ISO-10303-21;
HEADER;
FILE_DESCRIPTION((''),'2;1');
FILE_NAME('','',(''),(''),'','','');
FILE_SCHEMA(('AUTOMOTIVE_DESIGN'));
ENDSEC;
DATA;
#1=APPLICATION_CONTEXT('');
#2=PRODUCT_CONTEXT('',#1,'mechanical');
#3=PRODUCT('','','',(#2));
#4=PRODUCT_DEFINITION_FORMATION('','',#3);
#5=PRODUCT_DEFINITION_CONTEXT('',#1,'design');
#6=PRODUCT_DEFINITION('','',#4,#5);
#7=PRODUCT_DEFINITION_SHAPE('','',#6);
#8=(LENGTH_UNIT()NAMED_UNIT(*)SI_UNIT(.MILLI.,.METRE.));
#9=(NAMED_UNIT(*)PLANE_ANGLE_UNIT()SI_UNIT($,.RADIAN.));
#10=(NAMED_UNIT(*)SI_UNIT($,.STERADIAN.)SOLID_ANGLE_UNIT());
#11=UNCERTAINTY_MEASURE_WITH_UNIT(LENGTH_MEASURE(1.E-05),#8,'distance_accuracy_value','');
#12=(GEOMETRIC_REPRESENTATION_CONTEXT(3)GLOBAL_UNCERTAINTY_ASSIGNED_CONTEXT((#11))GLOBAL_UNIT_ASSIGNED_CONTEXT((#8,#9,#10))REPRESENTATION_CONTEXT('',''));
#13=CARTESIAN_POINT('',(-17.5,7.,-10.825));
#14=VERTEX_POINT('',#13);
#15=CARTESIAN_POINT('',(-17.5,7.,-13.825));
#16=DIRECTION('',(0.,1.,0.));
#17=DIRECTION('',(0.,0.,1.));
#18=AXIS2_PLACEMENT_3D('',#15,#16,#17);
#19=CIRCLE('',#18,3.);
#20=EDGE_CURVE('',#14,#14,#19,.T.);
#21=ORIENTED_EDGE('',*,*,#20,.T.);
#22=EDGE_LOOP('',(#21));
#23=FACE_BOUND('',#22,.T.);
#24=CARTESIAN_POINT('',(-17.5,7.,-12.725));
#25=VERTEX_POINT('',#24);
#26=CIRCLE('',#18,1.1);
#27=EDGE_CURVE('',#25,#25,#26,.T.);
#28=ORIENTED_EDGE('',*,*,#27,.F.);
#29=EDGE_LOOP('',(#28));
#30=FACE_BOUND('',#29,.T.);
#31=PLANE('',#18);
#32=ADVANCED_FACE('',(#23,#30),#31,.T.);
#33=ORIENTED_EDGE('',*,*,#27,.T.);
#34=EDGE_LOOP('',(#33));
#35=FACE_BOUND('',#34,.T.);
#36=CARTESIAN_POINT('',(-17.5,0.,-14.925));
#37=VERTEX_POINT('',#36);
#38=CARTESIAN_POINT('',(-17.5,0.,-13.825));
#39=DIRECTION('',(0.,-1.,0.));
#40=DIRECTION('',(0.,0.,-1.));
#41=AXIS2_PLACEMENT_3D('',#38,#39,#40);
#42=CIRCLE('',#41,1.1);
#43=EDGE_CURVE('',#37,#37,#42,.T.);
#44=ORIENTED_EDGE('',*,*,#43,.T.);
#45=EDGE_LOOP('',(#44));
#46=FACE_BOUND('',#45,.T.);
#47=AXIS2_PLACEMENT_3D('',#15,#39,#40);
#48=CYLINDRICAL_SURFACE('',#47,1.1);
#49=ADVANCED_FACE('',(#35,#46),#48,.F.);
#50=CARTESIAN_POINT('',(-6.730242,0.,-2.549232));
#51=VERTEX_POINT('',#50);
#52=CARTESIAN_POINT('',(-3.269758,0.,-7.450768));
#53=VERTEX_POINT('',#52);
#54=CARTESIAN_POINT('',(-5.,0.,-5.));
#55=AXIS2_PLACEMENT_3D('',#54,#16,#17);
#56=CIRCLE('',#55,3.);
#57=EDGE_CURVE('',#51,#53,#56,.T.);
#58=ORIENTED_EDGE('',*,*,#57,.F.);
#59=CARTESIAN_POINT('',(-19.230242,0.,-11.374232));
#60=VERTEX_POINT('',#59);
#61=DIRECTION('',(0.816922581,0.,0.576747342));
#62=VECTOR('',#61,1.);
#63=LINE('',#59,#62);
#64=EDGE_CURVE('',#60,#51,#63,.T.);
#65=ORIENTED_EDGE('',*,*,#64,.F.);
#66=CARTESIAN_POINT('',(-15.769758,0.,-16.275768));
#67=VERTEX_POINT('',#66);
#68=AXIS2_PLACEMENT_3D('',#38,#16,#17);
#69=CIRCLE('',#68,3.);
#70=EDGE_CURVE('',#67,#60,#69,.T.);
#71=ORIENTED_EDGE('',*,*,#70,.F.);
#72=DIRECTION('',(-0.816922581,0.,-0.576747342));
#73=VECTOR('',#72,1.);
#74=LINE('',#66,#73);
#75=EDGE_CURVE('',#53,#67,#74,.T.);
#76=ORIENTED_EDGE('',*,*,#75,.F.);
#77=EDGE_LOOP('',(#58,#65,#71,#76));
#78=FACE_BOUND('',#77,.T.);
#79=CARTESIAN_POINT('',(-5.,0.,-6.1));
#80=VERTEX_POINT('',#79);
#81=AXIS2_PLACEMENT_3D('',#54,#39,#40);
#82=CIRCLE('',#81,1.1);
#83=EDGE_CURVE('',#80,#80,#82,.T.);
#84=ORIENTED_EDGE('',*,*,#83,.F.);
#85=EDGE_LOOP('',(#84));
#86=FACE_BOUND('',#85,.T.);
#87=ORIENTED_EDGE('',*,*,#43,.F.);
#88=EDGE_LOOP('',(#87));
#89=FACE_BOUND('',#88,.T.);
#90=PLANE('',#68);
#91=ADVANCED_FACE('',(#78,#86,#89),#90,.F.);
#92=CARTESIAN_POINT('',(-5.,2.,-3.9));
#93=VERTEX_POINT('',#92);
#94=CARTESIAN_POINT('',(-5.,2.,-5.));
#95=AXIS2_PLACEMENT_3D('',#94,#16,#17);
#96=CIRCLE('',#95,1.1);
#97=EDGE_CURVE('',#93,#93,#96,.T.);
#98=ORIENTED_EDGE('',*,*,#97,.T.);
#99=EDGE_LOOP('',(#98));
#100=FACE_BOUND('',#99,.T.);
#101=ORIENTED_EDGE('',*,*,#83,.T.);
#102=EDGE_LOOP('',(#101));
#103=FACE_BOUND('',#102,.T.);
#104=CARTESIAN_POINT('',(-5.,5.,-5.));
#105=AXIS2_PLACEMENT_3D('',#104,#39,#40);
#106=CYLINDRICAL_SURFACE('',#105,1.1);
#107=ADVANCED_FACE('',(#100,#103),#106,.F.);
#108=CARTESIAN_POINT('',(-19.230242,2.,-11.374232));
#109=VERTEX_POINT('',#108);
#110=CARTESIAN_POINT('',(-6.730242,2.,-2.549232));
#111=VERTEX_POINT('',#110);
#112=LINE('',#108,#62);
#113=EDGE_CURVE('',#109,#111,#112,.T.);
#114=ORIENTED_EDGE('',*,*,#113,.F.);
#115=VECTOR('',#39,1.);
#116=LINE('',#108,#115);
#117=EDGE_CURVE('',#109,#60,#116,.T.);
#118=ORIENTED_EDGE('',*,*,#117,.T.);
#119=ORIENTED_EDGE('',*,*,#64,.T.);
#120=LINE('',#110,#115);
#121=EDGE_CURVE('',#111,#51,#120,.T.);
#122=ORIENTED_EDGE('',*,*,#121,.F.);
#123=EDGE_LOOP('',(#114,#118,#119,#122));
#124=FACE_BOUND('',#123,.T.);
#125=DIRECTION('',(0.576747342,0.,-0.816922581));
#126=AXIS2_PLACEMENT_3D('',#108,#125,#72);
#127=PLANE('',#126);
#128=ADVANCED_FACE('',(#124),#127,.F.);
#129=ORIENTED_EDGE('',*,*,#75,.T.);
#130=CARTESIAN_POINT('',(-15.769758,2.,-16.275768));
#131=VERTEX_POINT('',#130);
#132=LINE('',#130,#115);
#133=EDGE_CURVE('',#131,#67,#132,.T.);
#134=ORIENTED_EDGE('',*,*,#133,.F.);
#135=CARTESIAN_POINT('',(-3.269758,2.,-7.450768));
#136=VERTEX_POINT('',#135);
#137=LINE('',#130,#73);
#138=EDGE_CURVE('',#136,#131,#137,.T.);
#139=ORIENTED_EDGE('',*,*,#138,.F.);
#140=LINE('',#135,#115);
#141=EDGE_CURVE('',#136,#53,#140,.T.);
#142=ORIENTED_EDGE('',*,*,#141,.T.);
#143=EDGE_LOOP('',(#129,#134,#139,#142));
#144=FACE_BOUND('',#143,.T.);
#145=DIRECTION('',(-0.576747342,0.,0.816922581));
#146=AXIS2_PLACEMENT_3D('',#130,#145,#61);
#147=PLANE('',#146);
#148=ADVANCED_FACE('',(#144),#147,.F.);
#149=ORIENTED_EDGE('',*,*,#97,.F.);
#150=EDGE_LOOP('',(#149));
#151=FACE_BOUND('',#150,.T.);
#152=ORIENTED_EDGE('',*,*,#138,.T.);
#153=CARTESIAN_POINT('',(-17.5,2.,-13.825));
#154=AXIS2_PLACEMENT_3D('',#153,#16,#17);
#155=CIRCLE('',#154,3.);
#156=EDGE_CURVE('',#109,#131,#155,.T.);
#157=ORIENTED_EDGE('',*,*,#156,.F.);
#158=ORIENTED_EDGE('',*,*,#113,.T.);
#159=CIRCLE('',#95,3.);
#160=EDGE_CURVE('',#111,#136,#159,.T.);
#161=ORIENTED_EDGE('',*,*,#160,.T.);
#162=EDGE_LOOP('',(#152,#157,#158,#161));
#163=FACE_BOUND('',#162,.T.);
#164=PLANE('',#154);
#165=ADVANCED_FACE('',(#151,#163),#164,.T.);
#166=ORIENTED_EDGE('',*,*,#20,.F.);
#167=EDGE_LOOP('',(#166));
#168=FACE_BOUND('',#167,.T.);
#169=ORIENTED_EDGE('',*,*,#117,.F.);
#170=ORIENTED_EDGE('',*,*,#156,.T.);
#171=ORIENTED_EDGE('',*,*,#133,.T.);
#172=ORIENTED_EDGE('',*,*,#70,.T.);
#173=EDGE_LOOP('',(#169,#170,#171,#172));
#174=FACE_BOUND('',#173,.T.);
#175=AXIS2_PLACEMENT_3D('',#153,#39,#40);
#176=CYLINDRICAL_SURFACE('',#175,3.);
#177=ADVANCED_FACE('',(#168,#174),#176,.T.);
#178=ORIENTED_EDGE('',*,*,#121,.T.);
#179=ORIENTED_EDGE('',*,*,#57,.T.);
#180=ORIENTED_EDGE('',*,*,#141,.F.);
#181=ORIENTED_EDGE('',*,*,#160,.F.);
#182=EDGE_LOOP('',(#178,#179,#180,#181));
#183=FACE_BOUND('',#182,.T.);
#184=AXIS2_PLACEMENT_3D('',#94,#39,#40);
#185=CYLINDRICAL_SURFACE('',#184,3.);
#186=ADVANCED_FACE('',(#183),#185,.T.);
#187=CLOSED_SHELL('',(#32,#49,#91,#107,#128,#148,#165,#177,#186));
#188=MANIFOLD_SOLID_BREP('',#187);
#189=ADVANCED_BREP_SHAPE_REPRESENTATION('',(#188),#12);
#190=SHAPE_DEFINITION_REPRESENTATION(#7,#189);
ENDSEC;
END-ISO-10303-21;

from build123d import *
from build123d.topology import SkipClean

# Parameters (mm, degrees)
BOSS_EXTRUDE1_DEPTH = 2
SKETCH2_R           = 3
SKETCH2_R_2         = 1.1
BOSS_EXTRUDE2_DEPTH = 5
SKETCH4_R           = 1.1
CUT_EXTRUDE1_DEPTH  = 5


with BuildPart() as part:
    # Sketch1 → Boss-Extrude1 (new body)
    with BuildSketch(Plane(origin=(0, 0, 0), x_dir=(1, 0, 0), z_dir=(0, 1, 0))):
        with BuildLine():
            Line((-15.769757973, 16.275767743), (-3.269757973, 7.450767743))
            ThreePointArc((-3.269757973, 7.450767743), (-2.549232257, 3.269757973), (-6.730242027, 2.549232257))
            Line((-6.730242027, 2.549232257), (-19.230242027, 11.374232257))
            ThreePointArc((-19.230242027, 11.374232257), (-19.950767743, 15.555242027), (-15.769757973, 16.275767743))
        make_face()
    extrude(amount=BOSS_EXTRUDE1_DEPTH)

    # Sketch2 → Boss-Extrude2 (add)
    with SkipClean():  # the faces are left unmerged after this step: merging them gives an invalid solid
        with BuildSketch(Plane(origin=(0, 2, 0), x_dir=(1, 0, 0), z_dir=(0, 1, 0))):
            with Locations((-17.5, 13.825)):
                Circle(SKETCH2_R)
            with Locations((-17.5, 13.825)):
                Circle(SKETCH2_R_2, mode=Mode.SUBTRACT)
        extrude(amount=BOSS_EXTRUDE2_DEPTH)

    # Sketch4 → Cut-Extrude1 (cut)
    with SkipClean():  # the faces are left unmerged after this step: merging them gives an invalid solid
        with BuildSketch(Plane.XZ):
            with Locations((-5, -5)):
                Circle(SKETCH4_R)
            with Locations((-17.5, -13.825)):
                Circle(SKETCH4_R)
        extrude(amount=-CUT_EXTRUDE1_DEPTH, mode=Mode.SUBTRACT)


solid = part.part
